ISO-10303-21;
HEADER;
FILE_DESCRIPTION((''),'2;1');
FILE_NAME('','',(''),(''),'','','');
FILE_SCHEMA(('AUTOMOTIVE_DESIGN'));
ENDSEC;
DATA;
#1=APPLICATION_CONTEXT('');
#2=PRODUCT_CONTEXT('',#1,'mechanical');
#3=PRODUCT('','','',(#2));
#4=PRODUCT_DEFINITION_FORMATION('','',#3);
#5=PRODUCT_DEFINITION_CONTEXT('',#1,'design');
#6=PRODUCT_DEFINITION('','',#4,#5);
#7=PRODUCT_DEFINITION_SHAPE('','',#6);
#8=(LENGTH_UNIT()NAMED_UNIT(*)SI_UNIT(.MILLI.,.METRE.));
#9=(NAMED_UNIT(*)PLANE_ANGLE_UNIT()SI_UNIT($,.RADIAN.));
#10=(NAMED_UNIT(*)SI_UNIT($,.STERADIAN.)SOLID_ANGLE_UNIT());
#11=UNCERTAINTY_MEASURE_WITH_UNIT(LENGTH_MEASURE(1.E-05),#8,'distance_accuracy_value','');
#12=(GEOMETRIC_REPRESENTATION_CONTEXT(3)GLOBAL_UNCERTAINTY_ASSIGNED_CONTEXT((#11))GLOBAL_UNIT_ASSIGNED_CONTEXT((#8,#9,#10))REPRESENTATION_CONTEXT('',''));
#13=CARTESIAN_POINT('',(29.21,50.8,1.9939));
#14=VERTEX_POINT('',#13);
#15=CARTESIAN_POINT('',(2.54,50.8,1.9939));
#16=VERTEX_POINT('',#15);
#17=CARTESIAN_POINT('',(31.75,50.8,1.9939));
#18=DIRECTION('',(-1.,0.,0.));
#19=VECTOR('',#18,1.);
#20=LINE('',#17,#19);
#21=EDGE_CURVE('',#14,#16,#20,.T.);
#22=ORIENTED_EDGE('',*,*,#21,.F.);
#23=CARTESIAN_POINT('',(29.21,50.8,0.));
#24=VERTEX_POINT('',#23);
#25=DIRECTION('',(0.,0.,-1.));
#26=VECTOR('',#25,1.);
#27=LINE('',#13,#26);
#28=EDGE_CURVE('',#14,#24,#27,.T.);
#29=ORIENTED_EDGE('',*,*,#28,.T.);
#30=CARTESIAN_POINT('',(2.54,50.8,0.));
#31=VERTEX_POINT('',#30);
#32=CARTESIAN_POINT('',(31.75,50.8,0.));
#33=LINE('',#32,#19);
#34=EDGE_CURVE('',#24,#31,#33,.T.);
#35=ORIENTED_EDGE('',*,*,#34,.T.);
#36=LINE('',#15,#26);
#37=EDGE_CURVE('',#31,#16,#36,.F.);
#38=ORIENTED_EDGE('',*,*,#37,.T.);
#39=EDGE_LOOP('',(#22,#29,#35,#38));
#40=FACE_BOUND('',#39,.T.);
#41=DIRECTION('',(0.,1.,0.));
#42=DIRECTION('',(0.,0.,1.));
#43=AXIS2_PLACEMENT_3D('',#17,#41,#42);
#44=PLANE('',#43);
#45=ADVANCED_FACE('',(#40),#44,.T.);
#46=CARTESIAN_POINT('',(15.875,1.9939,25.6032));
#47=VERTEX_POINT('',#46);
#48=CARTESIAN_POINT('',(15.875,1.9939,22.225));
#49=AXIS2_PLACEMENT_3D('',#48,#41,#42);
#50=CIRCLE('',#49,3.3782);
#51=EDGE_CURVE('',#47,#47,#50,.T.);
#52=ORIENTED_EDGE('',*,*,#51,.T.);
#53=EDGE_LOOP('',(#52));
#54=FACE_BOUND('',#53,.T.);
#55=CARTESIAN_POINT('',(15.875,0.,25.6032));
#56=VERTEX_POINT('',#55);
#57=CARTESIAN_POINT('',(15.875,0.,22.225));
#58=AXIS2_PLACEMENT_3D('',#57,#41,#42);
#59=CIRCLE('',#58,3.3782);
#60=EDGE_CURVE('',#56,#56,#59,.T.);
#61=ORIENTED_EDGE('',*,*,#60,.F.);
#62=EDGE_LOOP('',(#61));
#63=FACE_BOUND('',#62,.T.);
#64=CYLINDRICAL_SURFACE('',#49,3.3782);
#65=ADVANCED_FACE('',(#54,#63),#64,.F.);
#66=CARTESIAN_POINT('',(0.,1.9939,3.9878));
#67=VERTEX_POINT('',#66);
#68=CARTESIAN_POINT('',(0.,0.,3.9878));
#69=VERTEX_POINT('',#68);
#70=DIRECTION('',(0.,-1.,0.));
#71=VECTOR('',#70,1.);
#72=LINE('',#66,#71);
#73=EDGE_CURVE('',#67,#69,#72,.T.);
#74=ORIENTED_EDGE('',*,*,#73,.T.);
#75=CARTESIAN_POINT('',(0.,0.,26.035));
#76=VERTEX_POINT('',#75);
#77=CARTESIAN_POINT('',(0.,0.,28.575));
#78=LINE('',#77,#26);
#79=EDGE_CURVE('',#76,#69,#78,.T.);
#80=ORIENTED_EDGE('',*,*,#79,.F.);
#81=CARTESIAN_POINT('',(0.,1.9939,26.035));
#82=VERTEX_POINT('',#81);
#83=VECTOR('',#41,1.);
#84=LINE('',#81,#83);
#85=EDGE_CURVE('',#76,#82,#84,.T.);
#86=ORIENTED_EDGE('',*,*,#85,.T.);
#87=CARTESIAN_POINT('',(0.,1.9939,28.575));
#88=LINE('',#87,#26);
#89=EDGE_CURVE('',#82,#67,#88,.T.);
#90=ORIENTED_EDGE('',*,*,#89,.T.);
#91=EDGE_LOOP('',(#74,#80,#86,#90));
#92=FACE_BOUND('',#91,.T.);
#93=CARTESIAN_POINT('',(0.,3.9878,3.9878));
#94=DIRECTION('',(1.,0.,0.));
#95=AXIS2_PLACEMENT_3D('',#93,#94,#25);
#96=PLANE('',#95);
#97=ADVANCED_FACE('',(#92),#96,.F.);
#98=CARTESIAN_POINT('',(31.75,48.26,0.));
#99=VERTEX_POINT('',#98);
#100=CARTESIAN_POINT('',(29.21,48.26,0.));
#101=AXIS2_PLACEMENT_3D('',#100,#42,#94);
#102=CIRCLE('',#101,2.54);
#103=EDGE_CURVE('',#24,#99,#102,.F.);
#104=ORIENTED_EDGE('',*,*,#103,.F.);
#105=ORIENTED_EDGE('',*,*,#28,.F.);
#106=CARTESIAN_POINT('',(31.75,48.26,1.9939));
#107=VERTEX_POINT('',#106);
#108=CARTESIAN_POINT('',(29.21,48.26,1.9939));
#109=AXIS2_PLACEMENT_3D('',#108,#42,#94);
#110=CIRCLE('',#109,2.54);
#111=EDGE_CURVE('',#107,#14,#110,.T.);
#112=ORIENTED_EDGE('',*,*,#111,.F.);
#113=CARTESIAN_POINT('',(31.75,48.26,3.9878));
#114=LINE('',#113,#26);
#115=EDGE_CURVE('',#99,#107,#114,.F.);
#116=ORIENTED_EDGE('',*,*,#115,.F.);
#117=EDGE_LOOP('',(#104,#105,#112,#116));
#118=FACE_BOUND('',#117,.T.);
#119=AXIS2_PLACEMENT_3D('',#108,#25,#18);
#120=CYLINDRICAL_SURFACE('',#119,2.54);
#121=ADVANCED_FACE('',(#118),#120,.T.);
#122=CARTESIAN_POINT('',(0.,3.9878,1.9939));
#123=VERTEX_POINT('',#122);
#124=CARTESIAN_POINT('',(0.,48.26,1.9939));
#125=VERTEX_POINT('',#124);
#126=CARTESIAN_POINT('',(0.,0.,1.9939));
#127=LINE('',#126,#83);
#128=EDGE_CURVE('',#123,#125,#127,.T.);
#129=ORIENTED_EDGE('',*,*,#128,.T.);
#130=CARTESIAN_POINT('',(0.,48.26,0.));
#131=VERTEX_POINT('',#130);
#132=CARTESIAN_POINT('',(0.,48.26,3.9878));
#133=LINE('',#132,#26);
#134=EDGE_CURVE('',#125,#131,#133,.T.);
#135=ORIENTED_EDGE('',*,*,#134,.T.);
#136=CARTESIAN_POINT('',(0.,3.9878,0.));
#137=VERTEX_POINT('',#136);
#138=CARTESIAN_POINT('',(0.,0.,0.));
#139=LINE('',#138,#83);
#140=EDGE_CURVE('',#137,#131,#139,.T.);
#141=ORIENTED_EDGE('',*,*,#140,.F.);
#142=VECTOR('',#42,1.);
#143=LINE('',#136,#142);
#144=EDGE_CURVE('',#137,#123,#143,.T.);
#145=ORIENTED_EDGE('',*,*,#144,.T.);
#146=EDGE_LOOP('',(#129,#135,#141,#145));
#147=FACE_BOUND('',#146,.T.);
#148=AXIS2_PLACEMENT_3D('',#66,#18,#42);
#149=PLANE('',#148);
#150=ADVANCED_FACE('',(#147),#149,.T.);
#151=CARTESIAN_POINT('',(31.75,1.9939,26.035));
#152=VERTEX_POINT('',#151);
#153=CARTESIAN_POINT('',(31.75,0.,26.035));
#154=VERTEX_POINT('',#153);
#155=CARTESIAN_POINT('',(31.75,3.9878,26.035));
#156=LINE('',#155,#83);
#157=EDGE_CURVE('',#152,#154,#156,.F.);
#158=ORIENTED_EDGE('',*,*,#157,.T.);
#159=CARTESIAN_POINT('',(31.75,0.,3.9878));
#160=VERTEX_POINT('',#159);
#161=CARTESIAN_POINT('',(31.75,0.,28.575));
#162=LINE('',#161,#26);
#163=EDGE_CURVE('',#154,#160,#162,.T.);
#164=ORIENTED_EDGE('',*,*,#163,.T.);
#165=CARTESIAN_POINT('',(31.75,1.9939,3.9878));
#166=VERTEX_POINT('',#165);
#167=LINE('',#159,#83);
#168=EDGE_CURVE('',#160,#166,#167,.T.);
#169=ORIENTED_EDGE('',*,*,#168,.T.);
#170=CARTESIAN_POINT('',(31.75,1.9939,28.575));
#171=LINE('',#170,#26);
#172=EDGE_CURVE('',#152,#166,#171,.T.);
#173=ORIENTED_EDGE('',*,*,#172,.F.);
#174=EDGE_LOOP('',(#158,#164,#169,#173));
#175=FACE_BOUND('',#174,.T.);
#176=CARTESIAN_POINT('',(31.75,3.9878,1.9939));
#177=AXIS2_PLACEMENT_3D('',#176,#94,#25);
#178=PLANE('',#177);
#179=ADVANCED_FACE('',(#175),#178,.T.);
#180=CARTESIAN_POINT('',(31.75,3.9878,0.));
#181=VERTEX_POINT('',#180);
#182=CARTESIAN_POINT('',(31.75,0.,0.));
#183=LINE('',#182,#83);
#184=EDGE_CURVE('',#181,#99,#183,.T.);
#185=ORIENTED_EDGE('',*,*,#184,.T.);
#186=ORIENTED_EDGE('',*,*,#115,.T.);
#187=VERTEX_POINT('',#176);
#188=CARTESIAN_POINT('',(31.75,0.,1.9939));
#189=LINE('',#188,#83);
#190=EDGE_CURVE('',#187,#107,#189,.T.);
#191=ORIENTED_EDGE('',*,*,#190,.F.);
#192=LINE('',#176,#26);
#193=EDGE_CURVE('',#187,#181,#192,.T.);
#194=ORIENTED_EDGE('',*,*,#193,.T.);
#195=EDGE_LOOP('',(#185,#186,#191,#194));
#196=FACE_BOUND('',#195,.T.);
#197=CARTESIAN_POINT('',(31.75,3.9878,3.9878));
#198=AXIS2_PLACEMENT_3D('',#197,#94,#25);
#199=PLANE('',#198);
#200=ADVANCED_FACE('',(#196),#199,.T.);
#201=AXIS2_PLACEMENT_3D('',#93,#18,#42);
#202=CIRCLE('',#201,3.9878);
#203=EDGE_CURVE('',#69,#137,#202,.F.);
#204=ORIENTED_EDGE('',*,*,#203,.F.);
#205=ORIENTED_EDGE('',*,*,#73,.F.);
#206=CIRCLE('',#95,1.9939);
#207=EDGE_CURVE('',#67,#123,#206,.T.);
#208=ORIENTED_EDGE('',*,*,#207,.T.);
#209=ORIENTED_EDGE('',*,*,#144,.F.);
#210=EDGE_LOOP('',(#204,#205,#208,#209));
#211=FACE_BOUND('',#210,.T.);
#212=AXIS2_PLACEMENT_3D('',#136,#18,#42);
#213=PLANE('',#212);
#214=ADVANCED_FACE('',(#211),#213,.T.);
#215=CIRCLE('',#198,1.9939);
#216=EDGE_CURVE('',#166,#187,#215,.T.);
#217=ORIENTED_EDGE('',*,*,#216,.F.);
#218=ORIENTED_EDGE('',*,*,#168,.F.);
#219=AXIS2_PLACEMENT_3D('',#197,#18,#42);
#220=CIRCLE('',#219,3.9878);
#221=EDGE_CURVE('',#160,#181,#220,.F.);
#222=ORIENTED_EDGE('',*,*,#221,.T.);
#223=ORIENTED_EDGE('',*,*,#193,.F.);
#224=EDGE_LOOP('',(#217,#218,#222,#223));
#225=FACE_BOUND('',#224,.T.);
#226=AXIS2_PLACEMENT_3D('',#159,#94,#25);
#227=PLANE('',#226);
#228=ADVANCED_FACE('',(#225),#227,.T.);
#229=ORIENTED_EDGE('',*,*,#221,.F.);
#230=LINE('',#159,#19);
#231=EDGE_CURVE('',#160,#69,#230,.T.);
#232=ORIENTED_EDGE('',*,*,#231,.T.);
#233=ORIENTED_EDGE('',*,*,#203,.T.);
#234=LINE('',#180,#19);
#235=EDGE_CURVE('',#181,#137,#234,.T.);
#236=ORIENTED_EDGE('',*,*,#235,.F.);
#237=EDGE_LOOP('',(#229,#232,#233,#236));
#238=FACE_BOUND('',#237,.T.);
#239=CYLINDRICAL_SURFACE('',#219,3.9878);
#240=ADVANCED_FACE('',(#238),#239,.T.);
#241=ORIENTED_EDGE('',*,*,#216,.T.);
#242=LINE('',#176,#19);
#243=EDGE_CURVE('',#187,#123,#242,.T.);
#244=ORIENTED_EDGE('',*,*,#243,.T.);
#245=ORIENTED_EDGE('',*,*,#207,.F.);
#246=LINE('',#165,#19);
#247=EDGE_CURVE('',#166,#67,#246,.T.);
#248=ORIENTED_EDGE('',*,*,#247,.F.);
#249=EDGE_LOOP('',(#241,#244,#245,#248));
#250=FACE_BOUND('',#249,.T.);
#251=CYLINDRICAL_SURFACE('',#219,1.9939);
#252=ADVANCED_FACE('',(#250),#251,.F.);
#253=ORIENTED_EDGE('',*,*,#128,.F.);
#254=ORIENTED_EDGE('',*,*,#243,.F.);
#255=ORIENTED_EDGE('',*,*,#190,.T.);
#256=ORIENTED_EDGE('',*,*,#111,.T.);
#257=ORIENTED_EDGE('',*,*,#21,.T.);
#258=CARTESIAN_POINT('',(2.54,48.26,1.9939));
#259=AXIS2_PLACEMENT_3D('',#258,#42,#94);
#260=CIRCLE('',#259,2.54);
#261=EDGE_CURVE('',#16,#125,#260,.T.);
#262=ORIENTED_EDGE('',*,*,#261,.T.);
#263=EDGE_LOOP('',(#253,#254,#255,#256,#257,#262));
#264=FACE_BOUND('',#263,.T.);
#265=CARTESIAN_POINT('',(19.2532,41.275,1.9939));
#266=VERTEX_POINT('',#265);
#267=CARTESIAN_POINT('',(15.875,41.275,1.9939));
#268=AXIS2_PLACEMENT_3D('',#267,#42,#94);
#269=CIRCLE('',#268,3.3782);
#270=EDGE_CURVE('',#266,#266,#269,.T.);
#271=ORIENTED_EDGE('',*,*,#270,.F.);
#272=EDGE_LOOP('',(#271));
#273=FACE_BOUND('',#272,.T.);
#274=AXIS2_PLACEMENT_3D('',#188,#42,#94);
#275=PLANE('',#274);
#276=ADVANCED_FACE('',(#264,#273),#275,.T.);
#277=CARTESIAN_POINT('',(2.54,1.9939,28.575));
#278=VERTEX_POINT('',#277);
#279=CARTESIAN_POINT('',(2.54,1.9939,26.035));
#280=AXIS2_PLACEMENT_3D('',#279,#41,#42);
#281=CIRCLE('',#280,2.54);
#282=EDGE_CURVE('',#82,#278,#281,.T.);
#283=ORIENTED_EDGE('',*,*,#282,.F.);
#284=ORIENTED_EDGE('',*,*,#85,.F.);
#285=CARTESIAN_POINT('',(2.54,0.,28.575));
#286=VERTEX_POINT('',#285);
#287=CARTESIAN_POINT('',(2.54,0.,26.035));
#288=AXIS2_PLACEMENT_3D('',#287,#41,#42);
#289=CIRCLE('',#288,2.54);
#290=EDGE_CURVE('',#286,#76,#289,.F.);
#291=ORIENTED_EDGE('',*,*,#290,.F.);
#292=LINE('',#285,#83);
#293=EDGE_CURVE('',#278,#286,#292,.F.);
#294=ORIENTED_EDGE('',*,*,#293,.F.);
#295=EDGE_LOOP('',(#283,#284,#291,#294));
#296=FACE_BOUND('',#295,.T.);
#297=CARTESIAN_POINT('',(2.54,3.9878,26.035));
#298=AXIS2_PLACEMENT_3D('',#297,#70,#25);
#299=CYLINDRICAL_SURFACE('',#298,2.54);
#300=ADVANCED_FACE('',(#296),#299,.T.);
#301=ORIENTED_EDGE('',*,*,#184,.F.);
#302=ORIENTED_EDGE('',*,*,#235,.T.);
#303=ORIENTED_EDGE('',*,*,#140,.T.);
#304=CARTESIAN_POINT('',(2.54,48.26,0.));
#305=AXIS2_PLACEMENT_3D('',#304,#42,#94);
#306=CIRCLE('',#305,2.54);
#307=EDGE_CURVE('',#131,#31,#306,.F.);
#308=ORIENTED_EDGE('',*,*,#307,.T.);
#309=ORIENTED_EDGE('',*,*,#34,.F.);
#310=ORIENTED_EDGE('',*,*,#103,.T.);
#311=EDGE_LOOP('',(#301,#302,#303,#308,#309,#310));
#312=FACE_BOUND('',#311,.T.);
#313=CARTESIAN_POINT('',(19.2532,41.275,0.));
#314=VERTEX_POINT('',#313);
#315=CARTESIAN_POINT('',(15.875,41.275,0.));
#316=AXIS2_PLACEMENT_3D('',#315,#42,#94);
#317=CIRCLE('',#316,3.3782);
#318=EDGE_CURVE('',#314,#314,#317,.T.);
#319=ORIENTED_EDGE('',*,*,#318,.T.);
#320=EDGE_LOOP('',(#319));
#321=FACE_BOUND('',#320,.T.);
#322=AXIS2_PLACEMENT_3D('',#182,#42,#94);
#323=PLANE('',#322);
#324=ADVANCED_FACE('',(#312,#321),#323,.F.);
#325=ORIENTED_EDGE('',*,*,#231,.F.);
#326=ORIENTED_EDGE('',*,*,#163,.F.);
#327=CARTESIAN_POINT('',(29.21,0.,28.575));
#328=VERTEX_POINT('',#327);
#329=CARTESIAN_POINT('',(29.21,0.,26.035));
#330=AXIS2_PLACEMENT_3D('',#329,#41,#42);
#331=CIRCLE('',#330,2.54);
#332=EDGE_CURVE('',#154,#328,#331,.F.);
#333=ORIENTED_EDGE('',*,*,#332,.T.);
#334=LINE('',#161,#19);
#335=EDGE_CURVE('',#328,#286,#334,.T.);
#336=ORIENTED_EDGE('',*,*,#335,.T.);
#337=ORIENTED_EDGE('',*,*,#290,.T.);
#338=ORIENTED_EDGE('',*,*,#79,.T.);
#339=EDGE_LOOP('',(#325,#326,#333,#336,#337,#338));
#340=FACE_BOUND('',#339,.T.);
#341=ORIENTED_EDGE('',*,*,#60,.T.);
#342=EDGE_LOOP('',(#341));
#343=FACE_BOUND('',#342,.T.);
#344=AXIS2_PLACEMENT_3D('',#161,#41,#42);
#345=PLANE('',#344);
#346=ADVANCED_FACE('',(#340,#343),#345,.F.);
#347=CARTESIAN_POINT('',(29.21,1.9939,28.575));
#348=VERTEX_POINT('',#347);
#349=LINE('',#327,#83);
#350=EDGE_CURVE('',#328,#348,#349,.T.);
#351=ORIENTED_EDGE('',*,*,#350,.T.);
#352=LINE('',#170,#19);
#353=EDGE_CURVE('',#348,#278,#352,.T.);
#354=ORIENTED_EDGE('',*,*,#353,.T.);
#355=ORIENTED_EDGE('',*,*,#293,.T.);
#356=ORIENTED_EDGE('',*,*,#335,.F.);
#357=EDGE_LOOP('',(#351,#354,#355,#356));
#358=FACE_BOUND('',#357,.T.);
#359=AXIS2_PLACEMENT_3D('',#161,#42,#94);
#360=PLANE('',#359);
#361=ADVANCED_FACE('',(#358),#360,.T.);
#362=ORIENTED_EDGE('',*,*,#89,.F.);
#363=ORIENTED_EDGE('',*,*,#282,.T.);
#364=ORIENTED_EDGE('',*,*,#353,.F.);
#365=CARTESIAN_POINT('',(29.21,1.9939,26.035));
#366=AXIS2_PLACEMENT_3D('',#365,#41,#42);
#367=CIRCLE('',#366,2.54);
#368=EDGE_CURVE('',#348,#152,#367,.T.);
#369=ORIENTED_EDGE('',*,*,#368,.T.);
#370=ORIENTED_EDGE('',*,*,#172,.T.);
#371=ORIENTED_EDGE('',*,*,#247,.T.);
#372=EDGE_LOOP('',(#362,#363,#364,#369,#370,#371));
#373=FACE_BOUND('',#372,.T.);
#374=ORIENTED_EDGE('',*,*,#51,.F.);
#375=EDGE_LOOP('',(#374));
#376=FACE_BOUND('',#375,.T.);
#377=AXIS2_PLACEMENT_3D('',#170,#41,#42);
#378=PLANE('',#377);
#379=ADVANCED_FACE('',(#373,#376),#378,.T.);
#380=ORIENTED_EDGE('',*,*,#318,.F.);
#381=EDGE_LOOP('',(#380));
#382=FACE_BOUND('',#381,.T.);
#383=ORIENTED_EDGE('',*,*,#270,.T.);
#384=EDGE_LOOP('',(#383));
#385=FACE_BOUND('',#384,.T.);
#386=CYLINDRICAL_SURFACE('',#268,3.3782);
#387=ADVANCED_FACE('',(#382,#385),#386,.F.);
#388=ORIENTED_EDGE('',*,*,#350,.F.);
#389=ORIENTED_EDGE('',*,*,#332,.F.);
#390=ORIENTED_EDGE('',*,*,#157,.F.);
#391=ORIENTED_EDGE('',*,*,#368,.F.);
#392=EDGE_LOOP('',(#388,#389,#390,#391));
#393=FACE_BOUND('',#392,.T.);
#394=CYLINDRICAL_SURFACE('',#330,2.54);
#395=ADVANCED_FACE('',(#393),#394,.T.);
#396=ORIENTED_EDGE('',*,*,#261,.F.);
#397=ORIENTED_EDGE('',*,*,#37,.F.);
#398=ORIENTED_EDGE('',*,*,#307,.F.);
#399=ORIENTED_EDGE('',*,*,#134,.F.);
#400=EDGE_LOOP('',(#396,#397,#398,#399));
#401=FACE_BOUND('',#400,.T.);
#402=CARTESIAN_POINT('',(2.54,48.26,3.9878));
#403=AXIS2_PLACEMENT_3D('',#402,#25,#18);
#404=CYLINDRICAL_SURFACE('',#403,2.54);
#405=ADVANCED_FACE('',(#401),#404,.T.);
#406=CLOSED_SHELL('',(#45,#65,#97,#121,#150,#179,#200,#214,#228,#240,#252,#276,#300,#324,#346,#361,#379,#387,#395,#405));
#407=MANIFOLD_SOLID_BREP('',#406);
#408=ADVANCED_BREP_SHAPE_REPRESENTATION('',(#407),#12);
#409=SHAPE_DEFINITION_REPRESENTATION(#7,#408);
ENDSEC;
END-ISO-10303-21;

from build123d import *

# Parameters (mm, degrees)
BASE_FLANGE1_DEPTH      = 31.75
F_1_4_CLEARANCE_HOLE1_D = 6.7564
F_1_4_CLEARANCE_HOLE2_D = 6.7564
FILLET1_R               = 2.54


# Sheet-metal steps are written as plain solids
with BuildPart() as part:
    # Sketch1 → Base-Flange1 (new body)
    with BuildSketch(Plane(origin=(0, 0, 0), x_dir=(0, 0, -1), z_dir=(1, 0, 0))):
        with BuildLine():
            Line((-28.575, 0), (-3.9878, 0))
            ThreePointArc((-3.9878, 0), (-1.167999578, 1.167999578), (0, 3.9878))
            Line((0, 3.9878), (0, 50.8))
            Line((0, 50.8), (-1.9939, 50.8))
            Line((-1.9939, 50.8), (-1.9939, 3.9878))
            ThreePointArc((-1.9939, 3.9878), (-2.577899789, 2.577899789), (-3.9878, 1.9939))
            Line((-3.9878, 1.9939), (-28.575, 1.9939))
            Line((-28.575, 1.9939), (-28.575, 0))
        make_face()
    extrude(amount=BASE_FLANGE1_DEPTH)

    # 1/4 Clearance Hole1 (through all)
    with Locations(Plane.XY.offset(1.9939)):
        with Locations((15.875, 41.275)):
            Hole(F_1_4_CLEARANCE_HOLE1_D / 2)

    # 1/4 Clearance Hole2 (through all)
    with Locations(Plane(origin=(0, 1.9939, 0), x_dir=(1, 0, 0), z_dir=(0, 1, 0))):
        with Locations((15.875, -22.225)):
            Hole(F_1_4_CLEARANCE_HOLE2_D / 2)

    # Fillet1
    fillet1_edges = [part.edges().sort_by_distance(p)[0] for p in [
        (31.75, 0.99695, 28.575),
        (0, 0.99695, 28.575),
        (31.75, 50.8, 0.99695),
        (0, 50.8, 0.99695),
    ]]
    fillet(fillet1_edges, radius=FILLET1_R)


solid = part.part
